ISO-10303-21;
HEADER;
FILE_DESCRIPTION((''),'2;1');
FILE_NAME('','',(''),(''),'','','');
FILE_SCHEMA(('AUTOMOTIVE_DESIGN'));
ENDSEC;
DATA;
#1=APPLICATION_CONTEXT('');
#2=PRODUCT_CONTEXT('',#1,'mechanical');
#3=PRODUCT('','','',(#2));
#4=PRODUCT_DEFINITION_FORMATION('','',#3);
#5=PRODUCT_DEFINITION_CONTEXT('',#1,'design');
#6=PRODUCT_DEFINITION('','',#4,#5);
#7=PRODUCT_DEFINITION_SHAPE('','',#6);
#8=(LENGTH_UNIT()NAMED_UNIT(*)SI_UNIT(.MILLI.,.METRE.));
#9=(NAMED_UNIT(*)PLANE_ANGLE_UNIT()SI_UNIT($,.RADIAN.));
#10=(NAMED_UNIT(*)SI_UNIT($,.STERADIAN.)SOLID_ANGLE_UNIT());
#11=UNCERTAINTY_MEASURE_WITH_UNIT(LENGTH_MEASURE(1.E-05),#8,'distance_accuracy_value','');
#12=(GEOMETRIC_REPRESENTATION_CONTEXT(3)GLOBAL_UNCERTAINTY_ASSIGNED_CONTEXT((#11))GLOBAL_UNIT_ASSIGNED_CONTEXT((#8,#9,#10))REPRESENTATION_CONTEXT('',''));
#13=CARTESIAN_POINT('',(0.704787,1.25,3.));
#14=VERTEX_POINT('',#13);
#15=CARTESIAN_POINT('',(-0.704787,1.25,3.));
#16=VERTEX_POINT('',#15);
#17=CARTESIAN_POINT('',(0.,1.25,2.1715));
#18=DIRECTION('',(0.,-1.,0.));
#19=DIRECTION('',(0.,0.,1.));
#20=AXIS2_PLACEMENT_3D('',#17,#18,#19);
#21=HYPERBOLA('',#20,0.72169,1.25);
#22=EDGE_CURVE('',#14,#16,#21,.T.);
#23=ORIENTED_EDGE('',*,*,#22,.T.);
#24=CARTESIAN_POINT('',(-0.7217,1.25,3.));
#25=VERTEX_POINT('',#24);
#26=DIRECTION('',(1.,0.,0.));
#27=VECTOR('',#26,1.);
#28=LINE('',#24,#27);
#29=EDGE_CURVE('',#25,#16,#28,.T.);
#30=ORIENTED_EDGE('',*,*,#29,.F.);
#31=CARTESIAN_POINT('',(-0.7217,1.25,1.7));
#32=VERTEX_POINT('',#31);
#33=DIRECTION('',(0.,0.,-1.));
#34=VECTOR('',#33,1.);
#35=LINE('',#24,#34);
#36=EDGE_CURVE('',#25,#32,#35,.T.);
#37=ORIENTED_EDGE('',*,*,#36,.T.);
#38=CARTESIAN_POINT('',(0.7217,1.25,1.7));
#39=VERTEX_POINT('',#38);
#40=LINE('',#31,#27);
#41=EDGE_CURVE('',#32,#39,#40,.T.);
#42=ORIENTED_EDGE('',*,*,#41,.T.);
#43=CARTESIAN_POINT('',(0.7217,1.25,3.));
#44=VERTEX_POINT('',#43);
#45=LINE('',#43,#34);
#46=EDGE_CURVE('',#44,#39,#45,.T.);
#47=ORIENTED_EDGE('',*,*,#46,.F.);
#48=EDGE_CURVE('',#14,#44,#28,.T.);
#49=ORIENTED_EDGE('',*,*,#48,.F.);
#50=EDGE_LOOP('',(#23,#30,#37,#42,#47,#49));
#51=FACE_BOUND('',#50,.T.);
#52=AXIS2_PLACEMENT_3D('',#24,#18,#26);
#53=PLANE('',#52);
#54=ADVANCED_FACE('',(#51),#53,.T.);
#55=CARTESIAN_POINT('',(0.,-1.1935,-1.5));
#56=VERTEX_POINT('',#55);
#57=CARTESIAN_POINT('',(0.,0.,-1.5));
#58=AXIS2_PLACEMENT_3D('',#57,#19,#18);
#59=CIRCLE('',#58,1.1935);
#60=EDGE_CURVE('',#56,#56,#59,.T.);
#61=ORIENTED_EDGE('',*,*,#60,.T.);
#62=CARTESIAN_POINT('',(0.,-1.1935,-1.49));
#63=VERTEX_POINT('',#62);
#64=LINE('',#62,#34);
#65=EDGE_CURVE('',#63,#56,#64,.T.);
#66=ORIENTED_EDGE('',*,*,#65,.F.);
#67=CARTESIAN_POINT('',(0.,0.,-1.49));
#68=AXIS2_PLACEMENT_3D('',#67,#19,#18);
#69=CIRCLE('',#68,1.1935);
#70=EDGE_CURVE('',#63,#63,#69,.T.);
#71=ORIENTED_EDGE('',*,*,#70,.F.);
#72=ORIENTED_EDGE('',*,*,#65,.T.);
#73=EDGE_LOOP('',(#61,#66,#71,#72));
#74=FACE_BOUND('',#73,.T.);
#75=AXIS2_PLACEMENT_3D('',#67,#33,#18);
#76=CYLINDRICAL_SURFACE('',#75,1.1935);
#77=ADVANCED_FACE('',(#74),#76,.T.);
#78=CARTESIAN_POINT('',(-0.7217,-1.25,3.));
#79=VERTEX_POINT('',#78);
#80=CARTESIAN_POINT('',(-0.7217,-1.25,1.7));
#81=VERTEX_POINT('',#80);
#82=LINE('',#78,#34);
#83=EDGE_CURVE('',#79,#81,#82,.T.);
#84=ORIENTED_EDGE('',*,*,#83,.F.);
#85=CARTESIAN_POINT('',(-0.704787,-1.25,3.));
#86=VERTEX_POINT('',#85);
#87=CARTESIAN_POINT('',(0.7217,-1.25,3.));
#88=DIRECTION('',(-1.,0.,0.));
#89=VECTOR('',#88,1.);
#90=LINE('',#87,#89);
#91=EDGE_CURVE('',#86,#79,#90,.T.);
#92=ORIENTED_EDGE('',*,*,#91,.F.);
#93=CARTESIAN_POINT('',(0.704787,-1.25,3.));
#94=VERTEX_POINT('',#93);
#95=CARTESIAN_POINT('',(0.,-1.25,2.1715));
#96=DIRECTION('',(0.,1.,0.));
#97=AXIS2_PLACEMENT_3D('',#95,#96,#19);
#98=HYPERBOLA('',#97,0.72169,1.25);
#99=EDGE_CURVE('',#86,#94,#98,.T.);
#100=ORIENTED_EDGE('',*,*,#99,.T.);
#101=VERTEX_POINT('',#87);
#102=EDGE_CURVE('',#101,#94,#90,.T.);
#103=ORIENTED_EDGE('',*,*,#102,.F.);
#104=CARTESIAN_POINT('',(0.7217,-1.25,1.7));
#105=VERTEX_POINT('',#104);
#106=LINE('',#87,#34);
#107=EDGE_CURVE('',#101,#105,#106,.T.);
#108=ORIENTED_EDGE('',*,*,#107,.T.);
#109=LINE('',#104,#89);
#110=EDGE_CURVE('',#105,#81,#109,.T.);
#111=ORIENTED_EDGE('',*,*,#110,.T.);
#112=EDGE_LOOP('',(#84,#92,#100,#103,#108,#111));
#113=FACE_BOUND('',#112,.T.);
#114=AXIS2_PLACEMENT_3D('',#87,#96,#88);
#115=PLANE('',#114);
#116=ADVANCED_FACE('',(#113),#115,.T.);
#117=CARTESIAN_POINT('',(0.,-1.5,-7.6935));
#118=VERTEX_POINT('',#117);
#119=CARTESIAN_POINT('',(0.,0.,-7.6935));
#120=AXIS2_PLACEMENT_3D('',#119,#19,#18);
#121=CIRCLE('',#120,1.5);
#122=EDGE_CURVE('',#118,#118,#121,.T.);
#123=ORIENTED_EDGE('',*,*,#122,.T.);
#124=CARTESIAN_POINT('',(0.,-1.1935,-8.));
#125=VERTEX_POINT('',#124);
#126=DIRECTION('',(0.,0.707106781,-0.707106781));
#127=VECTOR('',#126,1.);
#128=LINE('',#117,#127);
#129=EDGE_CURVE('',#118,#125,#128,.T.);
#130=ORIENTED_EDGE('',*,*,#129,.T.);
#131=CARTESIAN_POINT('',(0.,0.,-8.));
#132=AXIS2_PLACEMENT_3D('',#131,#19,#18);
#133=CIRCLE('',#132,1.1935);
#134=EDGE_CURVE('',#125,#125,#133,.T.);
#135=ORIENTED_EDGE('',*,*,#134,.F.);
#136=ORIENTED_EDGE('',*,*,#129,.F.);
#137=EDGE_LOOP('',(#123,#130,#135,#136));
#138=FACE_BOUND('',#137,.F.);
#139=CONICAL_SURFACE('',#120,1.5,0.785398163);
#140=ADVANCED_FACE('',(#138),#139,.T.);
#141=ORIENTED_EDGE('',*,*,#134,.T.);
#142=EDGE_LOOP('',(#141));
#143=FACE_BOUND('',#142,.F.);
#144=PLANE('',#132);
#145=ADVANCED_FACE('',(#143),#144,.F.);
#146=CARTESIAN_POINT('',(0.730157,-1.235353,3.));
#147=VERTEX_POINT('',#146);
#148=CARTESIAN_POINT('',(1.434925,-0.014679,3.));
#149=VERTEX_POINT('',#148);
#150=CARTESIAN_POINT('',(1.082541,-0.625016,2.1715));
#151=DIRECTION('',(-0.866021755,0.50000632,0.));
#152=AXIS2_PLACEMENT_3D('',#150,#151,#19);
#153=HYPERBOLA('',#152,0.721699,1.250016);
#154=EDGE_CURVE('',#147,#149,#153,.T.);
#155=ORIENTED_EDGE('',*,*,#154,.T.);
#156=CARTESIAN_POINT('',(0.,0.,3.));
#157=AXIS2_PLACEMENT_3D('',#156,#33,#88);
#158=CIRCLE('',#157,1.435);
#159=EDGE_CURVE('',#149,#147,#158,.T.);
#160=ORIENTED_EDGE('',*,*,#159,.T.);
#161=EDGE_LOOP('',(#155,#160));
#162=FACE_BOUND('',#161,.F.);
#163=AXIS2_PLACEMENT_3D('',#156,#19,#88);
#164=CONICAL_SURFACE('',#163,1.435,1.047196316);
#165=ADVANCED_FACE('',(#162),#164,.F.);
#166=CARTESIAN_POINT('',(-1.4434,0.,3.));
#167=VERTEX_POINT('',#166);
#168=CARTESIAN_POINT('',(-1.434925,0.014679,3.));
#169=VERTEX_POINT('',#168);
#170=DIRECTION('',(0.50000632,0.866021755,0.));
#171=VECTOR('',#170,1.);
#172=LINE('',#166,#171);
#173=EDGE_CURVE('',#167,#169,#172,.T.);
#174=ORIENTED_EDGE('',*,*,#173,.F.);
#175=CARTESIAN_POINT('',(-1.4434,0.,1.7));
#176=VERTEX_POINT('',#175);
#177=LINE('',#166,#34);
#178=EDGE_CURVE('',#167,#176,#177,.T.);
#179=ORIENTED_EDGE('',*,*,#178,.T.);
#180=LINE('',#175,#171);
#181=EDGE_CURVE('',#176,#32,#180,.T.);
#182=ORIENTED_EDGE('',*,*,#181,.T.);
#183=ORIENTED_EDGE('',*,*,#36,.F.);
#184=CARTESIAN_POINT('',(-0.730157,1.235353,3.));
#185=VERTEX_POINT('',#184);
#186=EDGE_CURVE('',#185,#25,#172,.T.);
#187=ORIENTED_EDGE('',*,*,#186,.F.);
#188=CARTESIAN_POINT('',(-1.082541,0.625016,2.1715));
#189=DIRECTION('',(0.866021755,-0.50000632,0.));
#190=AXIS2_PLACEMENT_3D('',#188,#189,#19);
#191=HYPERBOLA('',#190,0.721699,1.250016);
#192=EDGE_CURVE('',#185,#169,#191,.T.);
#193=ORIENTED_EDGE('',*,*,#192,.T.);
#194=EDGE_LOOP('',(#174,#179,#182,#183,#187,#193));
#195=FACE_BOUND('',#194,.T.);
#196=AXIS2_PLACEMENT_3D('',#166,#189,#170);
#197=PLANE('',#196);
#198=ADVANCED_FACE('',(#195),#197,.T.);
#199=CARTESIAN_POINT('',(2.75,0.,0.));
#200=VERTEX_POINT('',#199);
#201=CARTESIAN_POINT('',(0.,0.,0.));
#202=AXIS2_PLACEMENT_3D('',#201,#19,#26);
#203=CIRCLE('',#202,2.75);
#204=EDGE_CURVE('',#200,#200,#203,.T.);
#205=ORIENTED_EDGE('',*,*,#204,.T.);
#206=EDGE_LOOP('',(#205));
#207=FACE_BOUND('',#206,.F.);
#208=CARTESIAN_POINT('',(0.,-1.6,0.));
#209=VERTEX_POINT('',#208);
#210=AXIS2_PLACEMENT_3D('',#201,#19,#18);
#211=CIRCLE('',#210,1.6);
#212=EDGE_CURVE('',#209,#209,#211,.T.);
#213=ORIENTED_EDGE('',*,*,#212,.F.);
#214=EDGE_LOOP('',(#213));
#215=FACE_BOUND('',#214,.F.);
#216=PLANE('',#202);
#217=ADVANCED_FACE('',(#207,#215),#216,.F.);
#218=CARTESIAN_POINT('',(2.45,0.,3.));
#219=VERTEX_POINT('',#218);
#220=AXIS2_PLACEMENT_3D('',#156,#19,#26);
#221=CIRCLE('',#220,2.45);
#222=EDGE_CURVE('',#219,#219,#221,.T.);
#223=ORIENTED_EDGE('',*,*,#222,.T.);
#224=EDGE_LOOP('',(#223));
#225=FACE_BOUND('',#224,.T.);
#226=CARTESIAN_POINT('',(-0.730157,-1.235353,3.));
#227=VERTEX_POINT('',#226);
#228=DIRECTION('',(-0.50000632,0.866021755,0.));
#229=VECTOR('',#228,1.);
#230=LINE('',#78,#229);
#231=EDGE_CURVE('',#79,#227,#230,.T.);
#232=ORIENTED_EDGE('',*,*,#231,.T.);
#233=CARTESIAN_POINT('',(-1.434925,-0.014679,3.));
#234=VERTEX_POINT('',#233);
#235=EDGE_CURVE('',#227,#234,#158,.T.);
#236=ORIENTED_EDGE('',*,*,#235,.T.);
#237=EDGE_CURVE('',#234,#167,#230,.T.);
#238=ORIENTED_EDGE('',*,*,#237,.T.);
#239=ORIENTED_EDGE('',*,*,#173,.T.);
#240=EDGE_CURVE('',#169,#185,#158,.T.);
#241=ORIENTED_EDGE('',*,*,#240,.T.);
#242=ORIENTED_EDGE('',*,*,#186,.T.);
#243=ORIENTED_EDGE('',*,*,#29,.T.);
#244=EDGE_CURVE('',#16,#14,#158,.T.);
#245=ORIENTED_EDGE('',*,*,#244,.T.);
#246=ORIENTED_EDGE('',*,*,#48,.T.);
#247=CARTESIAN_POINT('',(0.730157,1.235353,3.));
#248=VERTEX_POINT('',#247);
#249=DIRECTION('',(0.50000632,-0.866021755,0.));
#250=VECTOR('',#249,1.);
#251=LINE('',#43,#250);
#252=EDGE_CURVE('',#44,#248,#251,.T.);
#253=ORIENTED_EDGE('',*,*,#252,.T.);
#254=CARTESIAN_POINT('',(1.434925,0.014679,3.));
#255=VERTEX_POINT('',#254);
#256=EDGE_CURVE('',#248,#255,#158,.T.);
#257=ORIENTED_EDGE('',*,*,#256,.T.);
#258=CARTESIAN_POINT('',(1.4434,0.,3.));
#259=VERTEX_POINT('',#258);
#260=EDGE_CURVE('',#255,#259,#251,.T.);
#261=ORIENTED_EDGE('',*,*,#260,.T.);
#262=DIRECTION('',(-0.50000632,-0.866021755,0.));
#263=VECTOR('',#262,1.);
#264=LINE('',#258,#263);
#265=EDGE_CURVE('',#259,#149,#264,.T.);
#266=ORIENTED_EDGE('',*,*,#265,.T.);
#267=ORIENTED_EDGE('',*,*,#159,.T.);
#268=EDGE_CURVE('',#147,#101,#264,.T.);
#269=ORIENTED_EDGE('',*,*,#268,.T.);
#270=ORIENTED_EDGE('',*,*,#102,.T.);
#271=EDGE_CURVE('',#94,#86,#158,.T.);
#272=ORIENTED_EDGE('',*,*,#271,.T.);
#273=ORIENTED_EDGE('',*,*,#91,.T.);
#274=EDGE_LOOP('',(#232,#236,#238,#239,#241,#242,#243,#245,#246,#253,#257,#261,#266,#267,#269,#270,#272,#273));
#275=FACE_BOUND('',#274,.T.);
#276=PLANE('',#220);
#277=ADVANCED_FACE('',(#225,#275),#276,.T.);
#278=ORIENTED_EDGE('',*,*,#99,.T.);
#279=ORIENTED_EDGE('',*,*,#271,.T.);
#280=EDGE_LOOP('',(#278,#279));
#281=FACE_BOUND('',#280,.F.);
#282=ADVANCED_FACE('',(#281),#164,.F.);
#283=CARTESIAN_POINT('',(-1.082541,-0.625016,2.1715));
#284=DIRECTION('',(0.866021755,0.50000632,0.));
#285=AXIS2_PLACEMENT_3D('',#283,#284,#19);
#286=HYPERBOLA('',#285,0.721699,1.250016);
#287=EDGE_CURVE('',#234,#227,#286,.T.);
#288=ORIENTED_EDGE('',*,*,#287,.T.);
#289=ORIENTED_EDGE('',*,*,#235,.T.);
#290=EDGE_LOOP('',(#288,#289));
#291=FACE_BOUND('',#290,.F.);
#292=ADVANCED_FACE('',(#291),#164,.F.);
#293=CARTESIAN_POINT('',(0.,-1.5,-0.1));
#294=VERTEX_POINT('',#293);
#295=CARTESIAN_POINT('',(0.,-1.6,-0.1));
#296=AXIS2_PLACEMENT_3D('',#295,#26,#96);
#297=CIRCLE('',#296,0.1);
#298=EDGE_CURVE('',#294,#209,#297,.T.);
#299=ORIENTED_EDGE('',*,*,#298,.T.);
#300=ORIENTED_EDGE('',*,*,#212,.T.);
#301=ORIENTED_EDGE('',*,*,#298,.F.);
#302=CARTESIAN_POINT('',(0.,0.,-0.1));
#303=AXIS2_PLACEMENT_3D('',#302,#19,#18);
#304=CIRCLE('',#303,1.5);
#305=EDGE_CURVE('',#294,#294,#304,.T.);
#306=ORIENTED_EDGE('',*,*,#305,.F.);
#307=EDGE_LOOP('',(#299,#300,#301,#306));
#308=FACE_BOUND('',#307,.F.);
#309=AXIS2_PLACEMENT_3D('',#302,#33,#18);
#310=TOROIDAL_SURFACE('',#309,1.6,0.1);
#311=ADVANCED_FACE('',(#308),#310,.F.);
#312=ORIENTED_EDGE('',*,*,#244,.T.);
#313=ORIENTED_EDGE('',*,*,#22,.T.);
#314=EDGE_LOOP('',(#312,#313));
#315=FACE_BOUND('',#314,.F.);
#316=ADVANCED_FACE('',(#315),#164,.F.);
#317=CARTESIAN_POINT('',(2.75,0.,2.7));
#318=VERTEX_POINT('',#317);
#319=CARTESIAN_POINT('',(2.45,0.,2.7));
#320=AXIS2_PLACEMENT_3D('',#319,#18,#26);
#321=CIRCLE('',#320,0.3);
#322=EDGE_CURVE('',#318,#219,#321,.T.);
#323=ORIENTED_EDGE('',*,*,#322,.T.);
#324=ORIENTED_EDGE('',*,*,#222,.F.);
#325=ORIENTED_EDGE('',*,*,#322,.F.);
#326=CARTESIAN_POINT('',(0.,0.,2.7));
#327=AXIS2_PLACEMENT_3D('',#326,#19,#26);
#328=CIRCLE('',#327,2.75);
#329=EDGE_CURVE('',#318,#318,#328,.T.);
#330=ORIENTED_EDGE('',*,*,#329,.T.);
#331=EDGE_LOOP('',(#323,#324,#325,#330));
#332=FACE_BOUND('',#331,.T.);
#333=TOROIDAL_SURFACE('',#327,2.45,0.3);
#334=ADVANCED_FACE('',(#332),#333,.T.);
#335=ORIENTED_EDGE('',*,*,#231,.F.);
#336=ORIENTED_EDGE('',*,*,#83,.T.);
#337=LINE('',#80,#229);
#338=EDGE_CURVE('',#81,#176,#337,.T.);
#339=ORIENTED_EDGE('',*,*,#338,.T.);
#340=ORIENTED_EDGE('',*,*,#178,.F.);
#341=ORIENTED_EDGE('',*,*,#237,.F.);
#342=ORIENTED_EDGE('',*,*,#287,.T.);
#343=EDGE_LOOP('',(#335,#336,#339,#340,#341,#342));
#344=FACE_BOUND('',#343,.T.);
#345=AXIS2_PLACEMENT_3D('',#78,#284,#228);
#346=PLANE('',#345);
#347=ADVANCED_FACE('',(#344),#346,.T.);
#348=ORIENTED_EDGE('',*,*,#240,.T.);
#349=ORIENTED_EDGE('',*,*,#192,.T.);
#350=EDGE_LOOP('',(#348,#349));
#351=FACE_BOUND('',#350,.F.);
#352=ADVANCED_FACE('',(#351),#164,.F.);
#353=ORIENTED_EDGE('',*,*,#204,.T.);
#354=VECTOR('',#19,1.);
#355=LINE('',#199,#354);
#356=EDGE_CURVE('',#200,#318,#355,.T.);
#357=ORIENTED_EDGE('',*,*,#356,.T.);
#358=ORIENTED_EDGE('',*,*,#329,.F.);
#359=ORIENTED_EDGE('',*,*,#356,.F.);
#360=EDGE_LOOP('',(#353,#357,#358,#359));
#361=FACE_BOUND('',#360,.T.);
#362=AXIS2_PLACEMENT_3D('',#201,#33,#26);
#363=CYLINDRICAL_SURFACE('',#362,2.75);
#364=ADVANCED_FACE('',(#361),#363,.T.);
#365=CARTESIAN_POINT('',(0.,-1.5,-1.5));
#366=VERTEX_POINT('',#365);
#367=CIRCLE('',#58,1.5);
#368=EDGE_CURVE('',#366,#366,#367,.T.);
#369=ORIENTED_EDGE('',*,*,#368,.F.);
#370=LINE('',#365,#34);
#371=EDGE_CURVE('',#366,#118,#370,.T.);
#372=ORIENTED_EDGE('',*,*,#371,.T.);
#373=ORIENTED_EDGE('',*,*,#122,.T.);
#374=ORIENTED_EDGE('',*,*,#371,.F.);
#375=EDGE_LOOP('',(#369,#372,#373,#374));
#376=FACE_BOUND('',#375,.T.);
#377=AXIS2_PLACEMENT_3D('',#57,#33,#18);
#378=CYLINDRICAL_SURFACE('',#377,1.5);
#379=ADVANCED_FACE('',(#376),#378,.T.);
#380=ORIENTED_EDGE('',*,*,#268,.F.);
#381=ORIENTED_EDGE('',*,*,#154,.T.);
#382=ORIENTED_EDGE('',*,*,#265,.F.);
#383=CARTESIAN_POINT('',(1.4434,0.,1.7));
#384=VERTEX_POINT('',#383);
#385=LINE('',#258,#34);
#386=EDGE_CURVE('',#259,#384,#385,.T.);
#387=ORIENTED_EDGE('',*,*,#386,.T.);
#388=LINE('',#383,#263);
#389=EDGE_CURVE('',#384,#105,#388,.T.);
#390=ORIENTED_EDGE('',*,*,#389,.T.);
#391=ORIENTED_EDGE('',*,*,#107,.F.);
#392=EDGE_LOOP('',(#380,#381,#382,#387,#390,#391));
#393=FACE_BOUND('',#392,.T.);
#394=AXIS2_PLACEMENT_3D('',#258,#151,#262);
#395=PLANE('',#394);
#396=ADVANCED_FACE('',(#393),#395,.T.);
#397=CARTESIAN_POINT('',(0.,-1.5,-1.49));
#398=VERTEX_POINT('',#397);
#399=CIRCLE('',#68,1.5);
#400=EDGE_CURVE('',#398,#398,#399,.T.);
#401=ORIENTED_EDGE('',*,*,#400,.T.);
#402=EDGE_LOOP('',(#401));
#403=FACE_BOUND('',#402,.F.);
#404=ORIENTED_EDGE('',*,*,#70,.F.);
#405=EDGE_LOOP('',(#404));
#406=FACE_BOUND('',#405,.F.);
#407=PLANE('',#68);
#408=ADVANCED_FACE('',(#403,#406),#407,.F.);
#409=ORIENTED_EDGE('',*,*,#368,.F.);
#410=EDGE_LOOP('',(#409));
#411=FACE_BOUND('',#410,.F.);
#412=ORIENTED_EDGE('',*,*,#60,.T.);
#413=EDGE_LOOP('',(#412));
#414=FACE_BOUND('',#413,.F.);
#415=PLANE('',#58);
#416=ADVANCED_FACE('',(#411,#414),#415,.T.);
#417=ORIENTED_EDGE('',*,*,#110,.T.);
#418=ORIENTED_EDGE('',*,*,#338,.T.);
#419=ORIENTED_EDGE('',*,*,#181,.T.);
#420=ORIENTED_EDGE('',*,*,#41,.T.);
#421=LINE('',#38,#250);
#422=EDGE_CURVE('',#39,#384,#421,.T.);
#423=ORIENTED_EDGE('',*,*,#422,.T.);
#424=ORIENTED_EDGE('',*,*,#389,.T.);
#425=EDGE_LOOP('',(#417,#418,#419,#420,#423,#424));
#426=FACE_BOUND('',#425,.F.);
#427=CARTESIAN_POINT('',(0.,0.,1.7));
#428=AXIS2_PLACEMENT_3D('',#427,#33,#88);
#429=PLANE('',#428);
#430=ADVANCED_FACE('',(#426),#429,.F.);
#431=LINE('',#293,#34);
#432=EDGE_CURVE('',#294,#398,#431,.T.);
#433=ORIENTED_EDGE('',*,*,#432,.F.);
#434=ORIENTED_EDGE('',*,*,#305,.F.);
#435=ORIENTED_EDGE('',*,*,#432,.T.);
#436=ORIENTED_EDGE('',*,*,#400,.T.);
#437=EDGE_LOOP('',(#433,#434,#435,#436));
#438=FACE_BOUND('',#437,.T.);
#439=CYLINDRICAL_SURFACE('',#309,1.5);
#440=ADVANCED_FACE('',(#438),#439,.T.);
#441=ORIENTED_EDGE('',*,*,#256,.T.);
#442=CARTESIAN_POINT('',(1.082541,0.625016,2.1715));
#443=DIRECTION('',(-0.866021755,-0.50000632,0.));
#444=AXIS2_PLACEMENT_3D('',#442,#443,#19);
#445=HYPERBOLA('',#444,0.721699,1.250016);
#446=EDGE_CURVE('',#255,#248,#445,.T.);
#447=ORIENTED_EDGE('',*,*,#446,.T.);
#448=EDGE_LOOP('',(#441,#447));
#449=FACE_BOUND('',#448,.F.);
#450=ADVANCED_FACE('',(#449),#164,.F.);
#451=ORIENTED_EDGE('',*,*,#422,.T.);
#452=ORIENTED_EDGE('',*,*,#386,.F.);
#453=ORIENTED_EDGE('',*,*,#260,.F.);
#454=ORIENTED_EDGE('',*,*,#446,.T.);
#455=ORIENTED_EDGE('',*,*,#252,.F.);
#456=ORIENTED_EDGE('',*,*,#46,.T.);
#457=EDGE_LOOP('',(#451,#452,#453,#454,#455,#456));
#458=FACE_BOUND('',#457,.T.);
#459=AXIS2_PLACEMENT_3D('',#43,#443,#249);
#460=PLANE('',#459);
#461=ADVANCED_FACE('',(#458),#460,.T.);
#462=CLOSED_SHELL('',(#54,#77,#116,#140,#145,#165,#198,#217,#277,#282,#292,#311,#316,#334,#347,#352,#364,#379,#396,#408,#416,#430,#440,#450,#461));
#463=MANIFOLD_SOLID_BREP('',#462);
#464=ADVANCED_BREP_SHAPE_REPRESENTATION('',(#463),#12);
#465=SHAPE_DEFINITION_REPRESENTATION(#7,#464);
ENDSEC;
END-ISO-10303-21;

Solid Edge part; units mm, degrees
sketch "Sketch1" plane through (0, 0, 0) normal (0, 0, 1) x (1, 0, 0)
  circle A0 centre (0, 0) radius 2.75
extrude "Protrusion1" add sketch "Sketch1" along normal blind 3
sketch "Sketch2" plane through (0, 0, 3) normal (0, 0, 1) x (0, 1, 0)
  line L0 (0, 1.4434) -> (1.25, 0.7217)
  line L1 (1.25, 0.7217) -> (1.25, -0.7217)
  line L2 (1.25, -0.7217) -> (0, -1.4434)
  line L3 (0, -1.4434) -> (-1.25, -0.7217)
  line L4 (-1.25, -0.7217) -> (-1.25, 0.7217)
  line L5 (-1.25, 0.7217) -> (0, 1.4434)
extrude "Cutout1" cut sketch "Sketch2" against normal blind 1.3
fillet "Round1" radius 0.3 1 edges at (-2.75, 0, 3)
sketch "Sketch3" plane through (0, 0, 0) normal (1, 0, 0) x (0, 1, 0)
  line L0 (-1.1935, -8) -> (0, -8)
  line L1 (-1.5, -7.6935) -> (-1.1935, -8)
  line L2 (-1.5, -1.5) -> (-1.5, -7.6935)
  line L3 (-1.1935, -1.5) -> (-1.5, -1.5)
  line L4 (-1.1935, -1.49) -> (-1.1935, -1.5)
  line L5 (-1.5, -1.49) -> (-1.1935, -1.49)
  line L6 (-1.5, -0.1) -> (-1.5, -1.49)
  arc A0 (-1.5, -0.1) -> (-1.6, 0) centre (-1.6, -0.1) ccw
  dimension "D1" = 1.5
  dimension "D2" = 0.01
  dimension "D3" = 0.1
  dimension "D4" = 8
revolve "RevolvedProtrusion1" add sketch "Sketch3" angle 360 about axis through (0, 0, -60.325) along (0, 0, 1) material side at (0, -0.5968, -7.95)
cosmetic_thread "Thread1" size "M3"
sketch "Sketch4" plane through (0, 0, 0) normal (0, -1, 0) x (1, 0, 0)
  line L0 (-1.435, 3) -> (0, 2.1715)
revolve "RevolvedCutout1" cut sketch "Sketch4" angle 360 about axis through (0, 0, 57.15) along (0, 0, -1) material side at (-0.6925, 0, 2.6291)
properties material "Stahl"
